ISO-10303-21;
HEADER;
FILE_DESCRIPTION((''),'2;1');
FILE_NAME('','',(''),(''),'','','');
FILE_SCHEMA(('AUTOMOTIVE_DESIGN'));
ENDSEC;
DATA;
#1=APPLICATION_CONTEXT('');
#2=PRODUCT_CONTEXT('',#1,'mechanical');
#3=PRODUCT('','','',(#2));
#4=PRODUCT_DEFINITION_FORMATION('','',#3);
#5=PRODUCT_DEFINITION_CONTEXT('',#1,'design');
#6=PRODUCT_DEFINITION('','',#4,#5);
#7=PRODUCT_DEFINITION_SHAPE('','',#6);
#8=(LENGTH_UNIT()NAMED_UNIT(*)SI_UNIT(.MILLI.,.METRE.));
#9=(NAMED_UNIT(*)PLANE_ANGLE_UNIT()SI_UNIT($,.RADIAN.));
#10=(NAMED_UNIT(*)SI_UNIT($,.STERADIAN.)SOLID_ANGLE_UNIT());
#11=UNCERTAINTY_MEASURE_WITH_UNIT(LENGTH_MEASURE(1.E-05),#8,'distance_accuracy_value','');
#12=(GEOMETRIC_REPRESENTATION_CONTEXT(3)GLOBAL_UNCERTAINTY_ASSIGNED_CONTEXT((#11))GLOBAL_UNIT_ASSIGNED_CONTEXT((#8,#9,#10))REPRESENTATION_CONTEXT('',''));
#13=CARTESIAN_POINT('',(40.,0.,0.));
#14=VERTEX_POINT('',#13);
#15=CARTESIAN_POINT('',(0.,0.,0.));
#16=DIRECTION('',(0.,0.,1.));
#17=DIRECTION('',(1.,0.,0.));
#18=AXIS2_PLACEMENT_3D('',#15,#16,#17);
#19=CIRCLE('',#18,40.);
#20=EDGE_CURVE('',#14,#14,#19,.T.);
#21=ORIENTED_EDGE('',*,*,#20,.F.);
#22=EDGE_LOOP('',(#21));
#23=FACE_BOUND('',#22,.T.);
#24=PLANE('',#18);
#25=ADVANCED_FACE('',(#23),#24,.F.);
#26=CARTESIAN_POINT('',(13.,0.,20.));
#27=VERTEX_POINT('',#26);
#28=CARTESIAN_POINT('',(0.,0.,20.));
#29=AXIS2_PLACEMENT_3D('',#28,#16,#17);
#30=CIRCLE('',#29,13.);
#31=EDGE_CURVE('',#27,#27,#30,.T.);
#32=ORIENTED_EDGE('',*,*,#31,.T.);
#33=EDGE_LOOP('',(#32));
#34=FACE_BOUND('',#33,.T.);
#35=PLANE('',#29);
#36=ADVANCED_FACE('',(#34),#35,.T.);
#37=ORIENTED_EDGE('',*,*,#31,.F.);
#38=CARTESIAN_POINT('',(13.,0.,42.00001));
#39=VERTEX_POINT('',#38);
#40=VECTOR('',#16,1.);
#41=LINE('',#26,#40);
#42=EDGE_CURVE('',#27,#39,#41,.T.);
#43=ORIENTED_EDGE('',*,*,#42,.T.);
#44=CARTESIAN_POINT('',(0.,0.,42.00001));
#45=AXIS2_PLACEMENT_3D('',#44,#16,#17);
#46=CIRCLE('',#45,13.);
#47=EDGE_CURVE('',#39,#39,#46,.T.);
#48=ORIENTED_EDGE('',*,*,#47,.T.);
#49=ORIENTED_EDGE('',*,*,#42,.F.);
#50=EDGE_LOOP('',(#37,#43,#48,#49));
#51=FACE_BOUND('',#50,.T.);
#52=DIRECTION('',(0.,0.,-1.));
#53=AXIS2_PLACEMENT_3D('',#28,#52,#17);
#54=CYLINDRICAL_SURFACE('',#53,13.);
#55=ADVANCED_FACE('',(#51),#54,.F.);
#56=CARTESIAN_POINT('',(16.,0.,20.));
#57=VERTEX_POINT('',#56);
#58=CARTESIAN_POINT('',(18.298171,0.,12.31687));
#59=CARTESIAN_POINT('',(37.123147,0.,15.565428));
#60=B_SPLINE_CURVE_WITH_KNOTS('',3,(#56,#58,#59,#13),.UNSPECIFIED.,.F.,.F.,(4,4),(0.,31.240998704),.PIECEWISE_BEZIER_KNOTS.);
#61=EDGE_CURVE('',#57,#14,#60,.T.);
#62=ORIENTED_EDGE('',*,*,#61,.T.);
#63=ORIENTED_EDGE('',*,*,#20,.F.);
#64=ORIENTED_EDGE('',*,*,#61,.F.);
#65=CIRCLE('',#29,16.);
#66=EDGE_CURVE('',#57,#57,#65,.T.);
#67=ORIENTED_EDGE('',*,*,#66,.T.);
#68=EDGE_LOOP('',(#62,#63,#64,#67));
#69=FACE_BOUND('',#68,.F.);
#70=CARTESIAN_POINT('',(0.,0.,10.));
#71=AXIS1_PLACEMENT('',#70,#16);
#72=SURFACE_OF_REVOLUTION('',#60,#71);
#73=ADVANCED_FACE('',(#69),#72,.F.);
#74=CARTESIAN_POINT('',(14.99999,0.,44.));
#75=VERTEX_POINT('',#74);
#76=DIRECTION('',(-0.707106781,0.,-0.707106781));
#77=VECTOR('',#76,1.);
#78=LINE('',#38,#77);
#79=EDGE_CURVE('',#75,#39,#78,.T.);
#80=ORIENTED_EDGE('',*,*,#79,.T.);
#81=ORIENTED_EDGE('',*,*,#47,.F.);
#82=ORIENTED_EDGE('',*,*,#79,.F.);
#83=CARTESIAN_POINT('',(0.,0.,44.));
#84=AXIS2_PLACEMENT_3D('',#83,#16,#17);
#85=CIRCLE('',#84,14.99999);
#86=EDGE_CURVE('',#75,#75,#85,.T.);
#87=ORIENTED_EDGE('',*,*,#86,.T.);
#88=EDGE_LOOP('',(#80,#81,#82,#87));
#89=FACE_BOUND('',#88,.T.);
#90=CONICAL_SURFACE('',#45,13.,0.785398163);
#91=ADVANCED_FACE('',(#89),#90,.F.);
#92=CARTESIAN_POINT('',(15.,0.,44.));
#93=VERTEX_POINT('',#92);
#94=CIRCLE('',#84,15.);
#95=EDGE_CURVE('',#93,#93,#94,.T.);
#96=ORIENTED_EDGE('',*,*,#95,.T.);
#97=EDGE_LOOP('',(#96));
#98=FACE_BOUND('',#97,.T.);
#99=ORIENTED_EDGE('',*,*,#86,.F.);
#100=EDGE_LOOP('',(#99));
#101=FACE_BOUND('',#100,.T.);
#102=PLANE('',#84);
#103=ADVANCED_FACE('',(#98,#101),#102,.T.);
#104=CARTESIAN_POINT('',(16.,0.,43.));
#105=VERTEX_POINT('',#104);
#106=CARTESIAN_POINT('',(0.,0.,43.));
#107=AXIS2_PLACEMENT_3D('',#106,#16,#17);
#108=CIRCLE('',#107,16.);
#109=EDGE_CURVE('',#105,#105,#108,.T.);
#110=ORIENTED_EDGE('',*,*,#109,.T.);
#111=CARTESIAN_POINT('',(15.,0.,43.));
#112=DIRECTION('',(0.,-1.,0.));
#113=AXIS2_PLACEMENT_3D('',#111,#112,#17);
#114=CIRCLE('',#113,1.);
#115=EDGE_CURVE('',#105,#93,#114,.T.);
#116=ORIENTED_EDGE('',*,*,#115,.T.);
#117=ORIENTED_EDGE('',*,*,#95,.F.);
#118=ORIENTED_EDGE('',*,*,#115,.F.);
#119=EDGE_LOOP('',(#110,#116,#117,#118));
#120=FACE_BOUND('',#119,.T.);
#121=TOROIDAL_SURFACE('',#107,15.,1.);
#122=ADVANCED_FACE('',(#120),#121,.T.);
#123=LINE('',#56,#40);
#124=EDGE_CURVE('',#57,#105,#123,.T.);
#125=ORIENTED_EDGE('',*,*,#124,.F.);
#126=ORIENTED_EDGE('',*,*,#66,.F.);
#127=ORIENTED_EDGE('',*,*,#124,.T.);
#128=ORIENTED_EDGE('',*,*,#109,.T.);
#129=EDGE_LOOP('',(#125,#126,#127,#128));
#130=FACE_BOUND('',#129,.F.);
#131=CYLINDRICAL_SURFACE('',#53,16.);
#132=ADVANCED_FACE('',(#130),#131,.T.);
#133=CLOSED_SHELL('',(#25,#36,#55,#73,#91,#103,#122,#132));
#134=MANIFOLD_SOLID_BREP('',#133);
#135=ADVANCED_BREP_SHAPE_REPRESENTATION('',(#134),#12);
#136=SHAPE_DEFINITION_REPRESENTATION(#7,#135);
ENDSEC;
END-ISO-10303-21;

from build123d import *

# Parameters (mm, degrees)
F0_R     = 16
F0_R_2   = 13
F1_DEPTH = 24
F5_R     = 1
F6_SIZE  = 1.99999


# Not quite as in the source:
# - a fillet or chamfer is up to 0.001 mm smaller than in the source, because OpenCascade refuses the exact size


with BuildPart() as f1:
    # F0 (on Top) → F1 (new body)
    with BuildSketch(Plane.XY):
        Circle(F0_R)
        Circle(F0_R_2, mode=Mode.SUBTRACT)
    extrude(amount=F1_DEPTH)


with BuildPart() as f1_1:
    # F2: moved
    add(f1.part.moved(Location((0, 0, 20))))

    # F3 (on Front) → F4 (revolve)
    with BuildSketch(Plane.XZ):
        with BuildLine():
            Line((0, 20), (0, 0))
            Line((0, 0), (40, 0))
            add(Edge.make_bspline(
                [(16, 20), (18.2981714606, 12.3168695718), (37.1231473982, 15.5654279515), (40, 0)],
                knots=[0, 0, 0, 0, 31.2409987036, 31.2409987036, 31.2409987036, 31.2409987036], degree=3))
            Line((16, 20), (0, 20))
        make_face()
    revolve(axis=Axis((0, 0, 10), (0, 0, 1)))

    # F5
    f5_edges = [f1_1.edges().sort_by_distance(p)[0] for p in [
        (-16, 0, 44),
    ]]
    fillet(f5_edges, radius=F5_R)

    # F6 (size 2 in the source; OpenCascade refuses exactly that, so slightly less here)
    f6_edges = [f1_1.edges().sort_by_distance(p)[0] for p in [
        (-13, 0, 44),
    ]]
    chamfer(f6_edges, length=F6_SIZE)


solid = f1_1.part
